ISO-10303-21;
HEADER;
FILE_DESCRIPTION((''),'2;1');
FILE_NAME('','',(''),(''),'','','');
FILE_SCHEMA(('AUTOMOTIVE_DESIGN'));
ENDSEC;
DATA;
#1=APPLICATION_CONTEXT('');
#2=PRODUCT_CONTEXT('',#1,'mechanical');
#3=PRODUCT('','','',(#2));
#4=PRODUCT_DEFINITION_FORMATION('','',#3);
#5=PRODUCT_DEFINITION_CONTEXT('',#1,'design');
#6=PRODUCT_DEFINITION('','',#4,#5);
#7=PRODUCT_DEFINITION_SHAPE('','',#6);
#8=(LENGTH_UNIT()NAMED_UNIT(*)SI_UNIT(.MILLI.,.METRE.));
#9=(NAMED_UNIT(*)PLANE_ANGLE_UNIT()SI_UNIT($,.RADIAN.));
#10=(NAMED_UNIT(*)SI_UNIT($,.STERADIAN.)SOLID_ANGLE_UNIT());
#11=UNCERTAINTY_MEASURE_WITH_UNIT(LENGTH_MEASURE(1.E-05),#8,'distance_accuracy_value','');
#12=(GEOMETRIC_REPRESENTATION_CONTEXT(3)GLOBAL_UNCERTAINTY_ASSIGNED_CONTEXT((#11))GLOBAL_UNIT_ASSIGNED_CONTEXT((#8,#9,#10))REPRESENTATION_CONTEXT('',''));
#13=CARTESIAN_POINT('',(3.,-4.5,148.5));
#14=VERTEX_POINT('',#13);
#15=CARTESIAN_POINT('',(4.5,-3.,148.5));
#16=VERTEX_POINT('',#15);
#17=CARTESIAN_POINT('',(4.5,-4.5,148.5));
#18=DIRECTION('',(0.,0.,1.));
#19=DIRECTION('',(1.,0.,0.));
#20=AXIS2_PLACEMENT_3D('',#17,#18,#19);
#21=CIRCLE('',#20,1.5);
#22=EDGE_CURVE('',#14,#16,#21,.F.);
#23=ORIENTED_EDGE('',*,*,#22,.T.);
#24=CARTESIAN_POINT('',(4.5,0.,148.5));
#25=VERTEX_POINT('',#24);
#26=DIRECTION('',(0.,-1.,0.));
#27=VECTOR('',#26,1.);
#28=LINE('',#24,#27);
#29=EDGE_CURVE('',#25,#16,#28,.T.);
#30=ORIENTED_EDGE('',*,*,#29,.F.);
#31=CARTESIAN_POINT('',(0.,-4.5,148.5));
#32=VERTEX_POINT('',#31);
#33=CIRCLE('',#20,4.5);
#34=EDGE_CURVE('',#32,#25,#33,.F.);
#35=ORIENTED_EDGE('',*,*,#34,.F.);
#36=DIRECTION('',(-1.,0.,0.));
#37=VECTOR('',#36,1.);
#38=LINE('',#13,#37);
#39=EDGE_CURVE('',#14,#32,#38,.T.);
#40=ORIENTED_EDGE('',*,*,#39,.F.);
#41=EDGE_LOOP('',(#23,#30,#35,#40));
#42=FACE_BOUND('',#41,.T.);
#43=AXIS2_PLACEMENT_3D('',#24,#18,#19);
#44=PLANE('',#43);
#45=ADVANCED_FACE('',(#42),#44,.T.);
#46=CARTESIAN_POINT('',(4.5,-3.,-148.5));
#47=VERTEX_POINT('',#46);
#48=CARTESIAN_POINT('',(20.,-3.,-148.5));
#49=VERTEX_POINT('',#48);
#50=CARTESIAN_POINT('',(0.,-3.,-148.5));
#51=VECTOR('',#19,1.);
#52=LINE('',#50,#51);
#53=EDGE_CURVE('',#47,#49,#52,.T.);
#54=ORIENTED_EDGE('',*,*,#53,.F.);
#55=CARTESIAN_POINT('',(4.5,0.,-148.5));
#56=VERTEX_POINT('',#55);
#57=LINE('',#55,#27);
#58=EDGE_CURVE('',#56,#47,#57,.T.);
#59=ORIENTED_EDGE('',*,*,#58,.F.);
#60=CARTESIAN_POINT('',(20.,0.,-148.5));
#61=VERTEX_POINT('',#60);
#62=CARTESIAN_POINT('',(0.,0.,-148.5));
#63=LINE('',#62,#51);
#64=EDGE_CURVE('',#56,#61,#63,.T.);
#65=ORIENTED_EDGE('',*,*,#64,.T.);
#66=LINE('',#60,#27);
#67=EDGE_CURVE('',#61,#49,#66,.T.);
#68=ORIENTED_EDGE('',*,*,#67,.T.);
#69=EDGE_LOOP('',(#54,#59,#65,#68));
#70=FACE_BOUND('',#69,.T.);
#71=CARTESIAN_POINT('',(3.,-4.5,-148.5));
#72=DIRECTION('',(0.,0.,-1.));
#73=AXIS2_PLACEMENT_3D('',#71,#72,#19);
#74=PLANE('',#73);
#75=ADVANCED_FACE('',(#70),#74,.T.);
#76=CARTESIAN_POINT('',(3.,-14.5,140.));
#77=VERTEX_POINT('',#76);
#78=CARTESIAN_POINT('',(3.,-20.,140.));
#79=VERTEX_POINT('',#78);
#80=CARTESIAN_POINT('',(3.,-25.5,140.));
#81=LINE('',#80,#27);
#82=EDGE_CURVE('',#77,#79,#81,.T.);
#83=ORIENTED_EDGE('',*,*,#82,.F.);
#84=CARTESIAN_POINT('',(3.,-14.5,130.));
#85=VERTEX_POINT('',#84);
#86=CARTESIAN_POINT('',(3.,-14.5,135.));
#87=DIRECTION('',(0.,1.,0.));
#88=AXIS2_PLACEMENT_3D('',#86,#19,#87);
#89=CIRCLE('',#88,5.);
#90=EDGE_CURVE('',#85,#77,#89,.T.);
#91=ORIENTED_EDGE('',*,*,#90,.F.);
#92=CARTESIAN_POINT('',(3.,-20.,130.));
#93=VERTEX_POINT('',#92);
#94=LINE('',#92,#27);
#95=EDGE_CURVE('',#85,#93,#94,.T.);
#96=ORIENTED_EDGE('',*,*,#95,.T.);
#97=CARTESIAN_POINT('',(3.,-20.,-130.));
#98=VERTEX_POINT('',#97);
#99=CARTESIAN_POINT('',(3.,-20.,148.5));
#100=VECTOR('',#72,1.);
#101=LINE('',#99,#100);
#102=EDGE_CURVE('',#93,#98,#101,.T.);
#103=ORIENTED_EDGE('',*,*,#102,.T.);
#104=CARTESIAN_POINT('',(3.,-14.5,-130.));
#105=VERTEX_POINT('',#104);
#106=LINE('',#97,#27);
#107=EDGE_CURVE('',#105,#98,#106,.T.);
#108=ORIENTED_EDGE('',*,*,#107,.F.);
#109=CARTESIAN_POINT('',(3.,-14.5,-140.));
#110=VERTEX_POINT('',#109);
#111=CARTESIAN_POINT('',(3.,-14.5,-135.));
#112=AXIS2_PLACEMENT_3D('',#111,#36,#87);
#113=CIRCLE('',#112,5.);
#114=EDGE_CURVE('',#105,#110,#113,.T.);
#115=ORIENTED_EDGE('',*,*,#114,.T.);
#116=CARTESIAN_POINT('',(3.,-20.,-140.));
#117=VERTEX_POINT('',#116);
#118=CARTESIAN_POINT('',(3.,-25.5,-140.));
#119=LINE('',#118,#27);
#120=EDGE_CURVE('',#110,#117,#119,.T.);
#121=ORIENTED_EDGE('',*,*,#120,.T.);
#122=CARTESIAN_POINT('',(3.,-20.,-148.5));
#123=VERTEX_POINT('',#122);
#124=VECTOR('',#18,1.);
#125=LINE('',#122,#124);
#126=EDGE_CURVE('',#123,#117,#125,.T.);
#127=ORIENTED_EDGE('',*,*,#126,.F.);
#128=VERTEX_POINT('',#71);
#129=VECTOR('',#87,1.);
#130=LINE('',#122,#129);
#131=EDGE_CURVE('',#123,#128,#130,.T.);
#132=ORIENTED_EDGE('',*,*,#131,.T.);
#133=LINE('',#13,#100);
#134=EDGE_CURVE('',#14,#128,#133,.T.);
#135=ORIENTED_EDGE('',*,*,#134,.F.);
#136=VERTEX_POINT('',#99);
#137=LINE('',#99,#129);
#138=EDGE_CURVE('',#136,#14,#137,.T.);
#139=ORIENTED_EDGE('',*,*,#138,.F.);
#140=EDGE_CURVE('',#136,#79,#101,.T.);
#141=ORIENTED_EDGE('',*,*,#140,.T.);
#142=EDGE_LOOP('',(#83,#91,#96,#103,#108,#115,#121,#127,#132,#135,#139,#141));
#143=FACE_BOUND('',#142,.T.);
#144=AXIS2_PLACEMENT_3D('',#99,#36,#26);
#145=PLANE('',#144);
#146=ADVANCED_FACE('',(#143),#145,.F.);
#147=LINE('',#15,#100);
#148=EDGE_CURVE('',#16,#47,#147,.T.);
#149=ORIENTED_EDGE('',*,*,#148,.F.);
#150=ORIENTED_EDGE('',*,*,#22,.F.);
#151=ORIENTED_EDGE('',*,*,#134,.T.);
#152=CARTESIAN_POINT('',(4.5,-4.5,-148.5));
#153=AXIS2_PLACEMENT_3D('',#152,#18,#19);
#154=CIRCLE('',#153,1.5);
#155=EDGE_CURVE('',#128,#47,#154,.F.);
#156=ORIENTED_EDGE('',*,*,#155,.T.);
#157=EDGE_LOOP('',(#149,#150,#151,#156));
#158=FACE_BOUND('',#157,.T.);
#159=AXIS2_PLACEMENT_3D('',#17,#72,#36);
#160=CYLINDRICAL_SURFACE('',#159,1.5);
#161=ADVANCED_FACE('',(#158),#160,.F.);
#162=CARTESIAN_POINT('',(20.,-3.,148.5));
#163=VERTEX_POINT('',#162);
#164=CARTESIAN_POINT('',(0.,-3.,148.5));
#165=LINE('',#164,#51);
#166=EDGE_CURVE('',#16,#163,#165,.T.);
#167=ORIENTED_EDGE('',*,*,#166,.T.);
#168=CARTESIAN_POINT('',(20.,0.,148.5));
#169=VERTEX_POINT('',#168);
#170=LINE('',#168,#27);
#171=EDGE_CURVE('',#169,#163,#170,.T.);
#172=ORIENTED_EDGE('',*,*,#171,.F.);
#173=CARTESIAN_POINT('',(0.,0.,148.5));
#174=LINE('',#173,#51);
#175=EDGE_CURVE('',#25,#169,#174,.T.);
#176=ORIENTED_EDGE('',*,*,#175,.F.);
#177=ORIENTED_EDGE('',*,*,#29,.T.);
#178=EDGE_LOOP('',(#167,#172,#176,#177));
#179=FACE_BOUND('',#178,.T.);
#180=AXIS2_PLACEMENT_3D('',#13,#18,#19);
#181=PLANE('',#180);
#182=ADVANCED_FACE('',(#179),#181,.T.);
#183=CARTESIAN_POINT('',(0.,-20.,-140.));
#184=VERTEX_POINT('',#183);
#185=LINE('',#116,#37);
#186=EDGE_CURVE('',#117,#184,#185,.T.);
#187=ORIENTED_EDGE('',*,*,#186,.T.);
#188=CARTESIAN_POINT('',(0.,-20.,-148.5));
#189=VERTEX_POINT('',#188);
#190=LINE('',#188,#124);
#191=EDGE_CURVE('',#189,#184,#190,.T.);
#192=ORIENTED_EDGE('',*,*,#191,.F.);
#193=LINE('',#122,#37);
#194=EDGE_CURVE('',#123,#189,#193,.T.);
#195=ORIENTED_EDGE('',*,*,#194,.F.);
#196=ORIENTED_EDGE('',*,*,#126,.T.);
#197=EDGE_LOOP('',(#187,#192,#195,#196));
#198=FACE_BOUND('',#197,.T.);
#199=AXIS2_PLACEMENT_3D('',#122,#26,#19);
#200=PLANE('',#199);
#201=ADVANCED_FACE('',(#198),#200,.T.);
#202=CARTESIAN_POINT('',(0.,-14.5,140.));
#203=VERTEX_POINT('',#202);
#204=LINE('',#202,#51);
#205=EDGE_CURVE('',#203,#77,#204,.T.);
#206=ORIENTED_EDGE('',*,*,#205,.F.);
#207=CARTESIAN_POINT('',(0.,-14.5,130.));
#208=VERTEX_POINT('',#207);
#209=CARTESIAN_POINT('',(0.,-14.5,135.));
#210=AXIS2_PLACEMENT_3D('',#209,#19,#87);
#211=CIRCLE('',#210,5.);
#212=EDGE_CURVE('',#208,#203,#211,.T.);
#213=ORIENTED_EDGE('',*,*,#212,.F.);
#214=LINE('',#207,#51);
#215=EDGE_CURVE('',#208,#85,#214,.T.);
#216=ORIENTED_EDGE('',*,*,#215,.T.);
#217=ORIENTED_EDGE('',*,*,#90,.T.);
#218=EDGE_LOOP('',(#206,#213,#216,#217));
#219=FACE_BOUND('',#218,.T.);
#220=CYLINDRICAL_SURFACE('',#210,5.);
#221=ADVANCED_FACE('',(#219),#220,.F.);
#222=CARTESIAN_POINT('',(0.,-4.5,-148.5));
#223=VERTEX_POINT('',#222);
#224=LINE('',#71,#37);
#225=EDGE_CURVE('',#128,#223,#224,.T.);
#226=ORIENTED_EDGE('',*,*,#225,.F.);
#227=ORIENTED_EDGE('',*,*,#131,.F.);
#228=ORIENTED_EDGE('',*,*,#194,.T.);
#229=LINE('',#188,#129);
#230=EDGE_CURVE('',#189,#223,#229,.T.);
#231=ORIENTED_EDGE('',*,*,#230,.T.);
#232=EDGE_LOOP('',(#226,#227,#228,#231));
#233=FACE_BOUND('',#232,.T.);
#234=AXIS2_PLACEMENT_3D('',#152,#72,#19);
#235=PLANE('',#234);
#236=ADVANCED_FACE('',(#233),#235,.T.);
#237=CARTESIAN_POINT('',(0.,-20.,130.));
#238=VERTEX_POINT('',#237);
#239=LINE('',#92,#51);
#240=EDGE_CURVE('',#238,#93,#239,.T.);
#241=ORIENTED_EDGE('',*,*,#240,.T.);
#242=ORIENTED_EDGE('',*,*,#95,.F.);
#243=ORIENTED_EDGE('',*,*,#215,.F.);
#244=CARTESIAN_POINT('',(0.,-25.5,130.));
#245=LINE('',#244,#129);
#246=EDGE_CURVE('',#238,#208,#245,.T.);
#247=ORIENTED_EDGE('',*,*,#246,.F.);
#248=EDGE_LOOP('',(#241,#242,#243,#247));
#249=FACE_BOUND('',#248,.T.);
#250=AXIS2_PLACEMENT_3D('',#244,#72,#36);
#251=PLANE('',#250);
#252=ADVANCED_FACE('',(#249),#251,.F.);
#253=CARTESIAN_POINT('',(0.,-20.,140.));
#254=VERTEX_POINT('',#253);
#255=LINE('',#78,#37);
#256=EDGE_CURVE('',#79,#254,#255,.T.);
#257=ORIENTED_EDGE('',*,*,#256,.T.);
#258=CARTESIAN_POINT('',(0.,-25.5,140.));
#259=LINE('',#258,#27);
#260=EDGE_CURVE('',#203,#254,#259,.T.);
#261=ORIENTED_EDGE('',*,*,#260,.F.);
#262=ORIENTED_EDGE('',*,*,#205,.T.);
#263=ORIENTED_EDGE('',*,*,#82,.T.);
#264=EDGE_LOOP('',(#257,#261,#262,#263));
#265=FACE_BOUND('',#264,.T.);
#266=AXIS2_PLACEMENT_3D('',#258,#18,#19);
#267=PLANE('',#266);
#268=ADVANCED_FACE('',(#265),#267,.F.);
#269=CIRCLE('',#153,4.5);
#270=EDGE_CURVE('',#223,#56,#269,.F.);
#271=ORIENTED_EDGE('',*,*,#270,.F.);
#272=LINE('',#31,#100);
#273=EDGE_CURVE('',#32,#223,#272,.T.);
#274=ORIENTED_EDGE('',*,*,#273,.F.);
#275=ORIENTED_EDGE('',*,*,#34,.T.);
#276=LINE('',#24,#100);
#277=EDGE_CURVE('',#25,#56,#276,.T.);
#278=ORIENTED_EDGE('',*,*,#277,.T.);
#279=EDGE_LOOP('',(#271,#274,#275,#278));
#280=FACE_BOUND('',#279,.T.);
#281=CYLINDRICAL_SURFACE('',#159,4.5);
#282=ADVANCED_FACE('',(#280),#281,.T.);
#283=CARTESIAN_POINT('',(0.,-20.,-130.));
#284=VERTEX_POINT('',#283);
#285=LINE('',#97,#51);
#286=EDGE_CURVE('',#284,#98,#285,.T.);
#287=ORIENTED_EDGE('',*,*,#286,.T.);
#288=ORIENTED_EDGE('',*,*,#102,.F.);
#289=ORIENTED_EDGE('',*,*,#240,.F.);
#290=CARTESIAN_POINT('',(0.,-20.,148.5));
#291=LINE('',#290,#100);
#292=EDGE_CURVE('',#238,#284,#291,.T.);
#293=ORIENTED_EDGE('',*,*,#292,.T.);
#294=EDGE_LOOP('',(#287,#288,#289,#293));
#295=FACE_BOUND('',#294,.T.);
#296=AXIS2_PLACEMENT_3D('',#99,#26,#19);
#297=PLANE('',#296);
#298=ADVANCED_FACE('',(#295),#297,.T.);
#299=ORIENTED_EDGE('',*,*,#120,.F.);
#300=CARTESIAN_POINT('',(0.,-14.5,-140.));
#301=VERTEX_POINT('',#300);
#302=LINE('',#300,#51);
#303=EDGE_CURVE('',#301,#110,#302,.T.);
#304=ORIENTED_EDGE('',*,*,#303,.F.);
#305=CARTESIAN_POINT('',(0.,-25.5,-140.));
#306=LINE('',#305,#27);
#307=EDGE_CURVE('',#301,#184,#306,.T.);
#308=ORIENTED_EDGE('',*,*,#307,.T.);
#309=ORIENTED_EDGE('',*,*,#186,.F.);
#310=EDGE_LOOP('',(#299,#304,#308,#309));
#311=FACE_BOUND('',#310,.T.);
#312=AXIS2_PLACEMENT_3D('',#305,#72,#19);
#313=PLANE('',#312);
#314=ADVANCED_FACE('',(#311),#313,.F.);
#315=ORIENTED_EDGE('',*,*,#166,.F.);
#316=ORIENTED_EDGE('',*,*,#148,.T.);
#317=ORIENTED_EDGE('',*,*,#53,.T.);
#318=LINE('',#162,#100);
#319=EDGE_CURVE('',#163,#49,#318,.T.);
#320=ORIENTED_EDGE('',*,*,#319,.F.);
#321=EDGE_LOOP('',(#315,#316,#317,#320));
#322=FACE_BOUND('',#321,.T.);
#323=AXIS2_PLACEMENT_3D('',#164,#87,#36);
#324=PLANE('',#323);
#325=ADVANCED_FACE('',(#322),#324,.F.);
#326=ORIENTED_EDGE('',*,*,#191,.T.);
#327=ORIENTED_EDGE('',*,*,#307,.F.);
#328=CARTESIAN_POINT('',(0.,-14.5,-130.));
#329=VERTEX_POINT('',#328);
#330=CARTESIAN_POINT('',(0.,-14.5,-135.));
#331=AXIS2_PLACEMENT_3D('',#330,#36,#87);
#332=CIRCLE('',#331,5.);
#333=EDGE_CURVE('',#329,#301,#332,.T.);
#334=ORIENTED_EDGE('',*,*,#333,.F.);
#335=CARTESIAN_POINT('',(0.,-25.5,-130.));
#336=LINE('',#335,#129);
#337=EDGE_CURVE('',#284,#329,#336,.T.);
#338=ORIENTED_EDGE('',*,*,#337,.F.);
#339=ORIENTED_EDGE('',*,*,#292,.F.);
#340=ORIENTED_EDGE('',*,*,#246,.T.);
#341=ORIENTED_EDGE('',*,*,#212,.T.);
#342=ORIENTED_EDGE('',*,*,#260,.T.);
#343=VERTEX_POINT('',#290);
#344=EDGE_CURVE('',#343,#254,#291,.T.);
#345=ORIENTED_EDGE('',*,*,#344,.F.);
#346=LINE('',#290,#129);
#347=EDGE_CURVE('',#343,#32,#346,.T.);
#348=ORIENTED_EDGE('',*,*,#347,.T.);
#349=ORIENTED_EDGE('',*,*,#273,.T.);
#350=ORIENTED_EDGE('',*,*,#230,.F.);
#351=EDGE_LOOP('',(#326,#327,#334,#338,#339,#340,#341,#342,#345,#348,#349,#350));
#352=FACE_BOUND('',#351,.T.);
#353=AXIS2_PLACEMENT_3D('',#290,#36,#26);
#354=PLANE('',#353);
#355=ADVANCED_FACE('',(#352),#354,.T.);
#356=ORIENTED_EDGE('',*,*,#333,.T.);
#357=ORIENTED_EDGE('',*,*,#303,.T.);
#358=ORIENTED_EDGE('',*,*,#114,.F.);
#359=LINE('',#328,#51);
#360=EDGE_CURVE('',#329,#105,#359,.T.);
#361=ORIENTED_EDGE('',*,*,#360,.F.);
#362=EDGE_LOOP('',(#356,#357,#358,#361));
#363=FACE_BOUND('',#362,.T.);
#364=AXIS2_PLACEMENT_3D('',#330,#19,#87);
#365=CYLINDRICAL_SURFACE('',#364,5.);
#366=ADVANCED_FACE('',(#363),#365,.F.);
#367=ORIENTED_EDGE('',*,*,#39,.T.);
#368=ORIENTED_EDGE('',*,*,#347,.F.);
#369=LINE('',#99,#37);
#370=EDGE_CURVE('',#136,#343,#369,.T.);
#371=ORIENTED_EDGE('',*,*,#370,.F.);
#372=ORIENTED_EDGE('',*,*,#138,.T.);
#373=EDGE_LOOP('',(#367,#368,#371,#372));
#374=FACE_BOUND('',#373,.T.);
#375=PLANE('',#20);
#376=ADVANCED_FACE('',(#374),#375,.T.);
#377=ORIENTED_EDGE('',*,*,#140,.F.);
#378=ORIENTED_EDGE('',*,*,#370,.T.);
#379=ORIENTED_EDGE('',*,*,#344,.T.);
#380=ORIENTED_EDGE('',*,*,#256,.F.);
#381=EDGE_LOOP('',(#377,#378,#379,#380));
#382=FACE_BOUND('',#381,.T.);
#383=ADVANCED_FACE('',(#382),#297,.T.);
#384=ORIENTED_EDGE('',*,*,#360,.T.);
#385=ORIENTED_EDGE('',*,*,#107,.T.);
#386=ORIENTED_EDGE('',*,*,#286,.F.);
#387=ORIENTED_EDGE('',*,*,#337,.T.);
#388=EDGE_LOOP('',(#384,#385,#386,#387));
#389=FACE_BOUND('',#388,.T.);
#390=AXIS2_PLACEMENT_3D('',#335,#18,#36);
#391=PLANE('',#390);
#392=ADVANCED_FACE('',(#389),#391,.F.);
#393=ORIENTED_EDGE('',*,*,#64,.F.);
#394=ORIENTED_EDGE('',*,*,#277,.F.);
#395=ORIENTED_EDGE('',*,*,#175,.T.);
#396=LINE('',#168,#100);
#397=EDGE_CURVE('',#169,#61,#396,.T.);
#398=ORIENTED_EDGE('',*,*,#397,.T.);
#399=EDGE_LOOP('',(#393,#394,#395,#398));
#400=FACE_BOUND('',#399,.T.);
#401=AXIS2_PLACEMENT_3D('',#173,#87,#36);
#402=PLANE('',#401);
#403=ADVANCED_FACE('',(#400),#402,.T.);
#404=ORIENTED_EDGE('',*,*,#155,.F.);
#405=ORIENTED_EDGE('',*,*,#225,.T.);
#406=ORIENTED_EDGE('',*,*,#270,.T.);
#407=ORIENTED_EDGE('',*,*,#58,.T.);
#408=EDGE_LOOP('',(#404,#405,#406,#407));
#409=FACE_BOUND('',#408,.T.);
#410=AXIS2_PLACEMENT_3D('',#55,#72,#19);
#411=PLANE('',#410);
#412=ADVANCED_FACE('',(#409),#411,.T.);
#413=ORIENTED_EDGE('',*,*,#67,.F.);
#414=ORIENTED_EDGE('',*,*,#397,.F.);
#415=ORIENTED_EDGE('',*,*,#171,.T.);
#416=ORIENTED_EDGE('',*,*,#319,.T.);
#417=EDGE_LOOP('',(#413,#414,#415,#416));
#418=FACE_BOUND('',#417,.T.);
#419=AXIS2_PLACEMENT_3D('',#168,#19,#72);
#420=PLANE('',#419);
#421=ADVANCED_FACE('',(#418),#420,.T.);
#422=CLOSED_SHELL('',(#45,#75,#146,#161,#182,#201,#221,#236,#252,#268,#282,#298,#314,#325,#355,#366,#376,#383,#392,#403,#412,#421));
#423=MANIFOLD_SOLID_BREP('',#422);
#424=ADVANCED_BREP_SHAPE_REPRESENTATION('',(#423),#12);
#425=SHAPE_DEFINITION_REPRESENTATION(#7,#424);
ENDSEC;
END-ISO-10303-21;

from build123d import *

# Parameters (mm, degrees)
SM_BASE_FLANGE_1_DEPTH = 148.5
CUT_EXTRUDE_1_DEPTH    = 151.802022533


# Sheet-metal steps are written as plain solids
with BuildPart() as part:
    # Sketch 2 → Базовая кромка1 (new body)
    with BuildSketch(Plane.XY):
        with BuildLine():
            Line((0, -20), (0, -4.5))
            ThreePointArc((0, -4.5), (1.318019485, -1.318019485), (4.5, 0))
            Line((4.5, 0), (20, 0))
            Line((20, 0), (20, -3))
            Line((20, -3), (4.5, -3))
            ThreePointArc((4.5, -3), (3.439339828, -3.439339828), (3, -4.5))
            Line((3, -4.5), (3, -20))
            Line((3, -20), (0, -20))
        make_face()
    extrude(amount=SM_BASE_FLANGE_1_DEPTH)

    # Эскиз10 → Вырез-Вытянуть1 (cut, through all)
    with BuildSketch(Plane(origin=(3, 0, 0), x_dir=(0, 0, -1), z_dir=(1, 0, 0))):
        with BuildLine():
            Line((-140, -25.5), (-140, -14.5))
            ThreePointArc((-140, -14.5), (-135, -9.5), (-130, -14.5))
            Line((-130, -14.5), (-130, -25.5))
            ThreePointArc((-130, -25.5), (-135, -30.5), (-140, -25.5))
        make_face()
    extrude(amount=-CUT_EXTRUDE_1_DEPTH, mode=Mode.SUBTRACT)

    # Зеркальное отражение1: part across plane


with BuildPart() as part_1:
    add(part.part)
    add(part.part.mirror(Plane(origin=(4.5, -4.5, 0), x_dir=(1, 0, 0), z_dir=(0, 0, 1))))


solid = part_1.part
